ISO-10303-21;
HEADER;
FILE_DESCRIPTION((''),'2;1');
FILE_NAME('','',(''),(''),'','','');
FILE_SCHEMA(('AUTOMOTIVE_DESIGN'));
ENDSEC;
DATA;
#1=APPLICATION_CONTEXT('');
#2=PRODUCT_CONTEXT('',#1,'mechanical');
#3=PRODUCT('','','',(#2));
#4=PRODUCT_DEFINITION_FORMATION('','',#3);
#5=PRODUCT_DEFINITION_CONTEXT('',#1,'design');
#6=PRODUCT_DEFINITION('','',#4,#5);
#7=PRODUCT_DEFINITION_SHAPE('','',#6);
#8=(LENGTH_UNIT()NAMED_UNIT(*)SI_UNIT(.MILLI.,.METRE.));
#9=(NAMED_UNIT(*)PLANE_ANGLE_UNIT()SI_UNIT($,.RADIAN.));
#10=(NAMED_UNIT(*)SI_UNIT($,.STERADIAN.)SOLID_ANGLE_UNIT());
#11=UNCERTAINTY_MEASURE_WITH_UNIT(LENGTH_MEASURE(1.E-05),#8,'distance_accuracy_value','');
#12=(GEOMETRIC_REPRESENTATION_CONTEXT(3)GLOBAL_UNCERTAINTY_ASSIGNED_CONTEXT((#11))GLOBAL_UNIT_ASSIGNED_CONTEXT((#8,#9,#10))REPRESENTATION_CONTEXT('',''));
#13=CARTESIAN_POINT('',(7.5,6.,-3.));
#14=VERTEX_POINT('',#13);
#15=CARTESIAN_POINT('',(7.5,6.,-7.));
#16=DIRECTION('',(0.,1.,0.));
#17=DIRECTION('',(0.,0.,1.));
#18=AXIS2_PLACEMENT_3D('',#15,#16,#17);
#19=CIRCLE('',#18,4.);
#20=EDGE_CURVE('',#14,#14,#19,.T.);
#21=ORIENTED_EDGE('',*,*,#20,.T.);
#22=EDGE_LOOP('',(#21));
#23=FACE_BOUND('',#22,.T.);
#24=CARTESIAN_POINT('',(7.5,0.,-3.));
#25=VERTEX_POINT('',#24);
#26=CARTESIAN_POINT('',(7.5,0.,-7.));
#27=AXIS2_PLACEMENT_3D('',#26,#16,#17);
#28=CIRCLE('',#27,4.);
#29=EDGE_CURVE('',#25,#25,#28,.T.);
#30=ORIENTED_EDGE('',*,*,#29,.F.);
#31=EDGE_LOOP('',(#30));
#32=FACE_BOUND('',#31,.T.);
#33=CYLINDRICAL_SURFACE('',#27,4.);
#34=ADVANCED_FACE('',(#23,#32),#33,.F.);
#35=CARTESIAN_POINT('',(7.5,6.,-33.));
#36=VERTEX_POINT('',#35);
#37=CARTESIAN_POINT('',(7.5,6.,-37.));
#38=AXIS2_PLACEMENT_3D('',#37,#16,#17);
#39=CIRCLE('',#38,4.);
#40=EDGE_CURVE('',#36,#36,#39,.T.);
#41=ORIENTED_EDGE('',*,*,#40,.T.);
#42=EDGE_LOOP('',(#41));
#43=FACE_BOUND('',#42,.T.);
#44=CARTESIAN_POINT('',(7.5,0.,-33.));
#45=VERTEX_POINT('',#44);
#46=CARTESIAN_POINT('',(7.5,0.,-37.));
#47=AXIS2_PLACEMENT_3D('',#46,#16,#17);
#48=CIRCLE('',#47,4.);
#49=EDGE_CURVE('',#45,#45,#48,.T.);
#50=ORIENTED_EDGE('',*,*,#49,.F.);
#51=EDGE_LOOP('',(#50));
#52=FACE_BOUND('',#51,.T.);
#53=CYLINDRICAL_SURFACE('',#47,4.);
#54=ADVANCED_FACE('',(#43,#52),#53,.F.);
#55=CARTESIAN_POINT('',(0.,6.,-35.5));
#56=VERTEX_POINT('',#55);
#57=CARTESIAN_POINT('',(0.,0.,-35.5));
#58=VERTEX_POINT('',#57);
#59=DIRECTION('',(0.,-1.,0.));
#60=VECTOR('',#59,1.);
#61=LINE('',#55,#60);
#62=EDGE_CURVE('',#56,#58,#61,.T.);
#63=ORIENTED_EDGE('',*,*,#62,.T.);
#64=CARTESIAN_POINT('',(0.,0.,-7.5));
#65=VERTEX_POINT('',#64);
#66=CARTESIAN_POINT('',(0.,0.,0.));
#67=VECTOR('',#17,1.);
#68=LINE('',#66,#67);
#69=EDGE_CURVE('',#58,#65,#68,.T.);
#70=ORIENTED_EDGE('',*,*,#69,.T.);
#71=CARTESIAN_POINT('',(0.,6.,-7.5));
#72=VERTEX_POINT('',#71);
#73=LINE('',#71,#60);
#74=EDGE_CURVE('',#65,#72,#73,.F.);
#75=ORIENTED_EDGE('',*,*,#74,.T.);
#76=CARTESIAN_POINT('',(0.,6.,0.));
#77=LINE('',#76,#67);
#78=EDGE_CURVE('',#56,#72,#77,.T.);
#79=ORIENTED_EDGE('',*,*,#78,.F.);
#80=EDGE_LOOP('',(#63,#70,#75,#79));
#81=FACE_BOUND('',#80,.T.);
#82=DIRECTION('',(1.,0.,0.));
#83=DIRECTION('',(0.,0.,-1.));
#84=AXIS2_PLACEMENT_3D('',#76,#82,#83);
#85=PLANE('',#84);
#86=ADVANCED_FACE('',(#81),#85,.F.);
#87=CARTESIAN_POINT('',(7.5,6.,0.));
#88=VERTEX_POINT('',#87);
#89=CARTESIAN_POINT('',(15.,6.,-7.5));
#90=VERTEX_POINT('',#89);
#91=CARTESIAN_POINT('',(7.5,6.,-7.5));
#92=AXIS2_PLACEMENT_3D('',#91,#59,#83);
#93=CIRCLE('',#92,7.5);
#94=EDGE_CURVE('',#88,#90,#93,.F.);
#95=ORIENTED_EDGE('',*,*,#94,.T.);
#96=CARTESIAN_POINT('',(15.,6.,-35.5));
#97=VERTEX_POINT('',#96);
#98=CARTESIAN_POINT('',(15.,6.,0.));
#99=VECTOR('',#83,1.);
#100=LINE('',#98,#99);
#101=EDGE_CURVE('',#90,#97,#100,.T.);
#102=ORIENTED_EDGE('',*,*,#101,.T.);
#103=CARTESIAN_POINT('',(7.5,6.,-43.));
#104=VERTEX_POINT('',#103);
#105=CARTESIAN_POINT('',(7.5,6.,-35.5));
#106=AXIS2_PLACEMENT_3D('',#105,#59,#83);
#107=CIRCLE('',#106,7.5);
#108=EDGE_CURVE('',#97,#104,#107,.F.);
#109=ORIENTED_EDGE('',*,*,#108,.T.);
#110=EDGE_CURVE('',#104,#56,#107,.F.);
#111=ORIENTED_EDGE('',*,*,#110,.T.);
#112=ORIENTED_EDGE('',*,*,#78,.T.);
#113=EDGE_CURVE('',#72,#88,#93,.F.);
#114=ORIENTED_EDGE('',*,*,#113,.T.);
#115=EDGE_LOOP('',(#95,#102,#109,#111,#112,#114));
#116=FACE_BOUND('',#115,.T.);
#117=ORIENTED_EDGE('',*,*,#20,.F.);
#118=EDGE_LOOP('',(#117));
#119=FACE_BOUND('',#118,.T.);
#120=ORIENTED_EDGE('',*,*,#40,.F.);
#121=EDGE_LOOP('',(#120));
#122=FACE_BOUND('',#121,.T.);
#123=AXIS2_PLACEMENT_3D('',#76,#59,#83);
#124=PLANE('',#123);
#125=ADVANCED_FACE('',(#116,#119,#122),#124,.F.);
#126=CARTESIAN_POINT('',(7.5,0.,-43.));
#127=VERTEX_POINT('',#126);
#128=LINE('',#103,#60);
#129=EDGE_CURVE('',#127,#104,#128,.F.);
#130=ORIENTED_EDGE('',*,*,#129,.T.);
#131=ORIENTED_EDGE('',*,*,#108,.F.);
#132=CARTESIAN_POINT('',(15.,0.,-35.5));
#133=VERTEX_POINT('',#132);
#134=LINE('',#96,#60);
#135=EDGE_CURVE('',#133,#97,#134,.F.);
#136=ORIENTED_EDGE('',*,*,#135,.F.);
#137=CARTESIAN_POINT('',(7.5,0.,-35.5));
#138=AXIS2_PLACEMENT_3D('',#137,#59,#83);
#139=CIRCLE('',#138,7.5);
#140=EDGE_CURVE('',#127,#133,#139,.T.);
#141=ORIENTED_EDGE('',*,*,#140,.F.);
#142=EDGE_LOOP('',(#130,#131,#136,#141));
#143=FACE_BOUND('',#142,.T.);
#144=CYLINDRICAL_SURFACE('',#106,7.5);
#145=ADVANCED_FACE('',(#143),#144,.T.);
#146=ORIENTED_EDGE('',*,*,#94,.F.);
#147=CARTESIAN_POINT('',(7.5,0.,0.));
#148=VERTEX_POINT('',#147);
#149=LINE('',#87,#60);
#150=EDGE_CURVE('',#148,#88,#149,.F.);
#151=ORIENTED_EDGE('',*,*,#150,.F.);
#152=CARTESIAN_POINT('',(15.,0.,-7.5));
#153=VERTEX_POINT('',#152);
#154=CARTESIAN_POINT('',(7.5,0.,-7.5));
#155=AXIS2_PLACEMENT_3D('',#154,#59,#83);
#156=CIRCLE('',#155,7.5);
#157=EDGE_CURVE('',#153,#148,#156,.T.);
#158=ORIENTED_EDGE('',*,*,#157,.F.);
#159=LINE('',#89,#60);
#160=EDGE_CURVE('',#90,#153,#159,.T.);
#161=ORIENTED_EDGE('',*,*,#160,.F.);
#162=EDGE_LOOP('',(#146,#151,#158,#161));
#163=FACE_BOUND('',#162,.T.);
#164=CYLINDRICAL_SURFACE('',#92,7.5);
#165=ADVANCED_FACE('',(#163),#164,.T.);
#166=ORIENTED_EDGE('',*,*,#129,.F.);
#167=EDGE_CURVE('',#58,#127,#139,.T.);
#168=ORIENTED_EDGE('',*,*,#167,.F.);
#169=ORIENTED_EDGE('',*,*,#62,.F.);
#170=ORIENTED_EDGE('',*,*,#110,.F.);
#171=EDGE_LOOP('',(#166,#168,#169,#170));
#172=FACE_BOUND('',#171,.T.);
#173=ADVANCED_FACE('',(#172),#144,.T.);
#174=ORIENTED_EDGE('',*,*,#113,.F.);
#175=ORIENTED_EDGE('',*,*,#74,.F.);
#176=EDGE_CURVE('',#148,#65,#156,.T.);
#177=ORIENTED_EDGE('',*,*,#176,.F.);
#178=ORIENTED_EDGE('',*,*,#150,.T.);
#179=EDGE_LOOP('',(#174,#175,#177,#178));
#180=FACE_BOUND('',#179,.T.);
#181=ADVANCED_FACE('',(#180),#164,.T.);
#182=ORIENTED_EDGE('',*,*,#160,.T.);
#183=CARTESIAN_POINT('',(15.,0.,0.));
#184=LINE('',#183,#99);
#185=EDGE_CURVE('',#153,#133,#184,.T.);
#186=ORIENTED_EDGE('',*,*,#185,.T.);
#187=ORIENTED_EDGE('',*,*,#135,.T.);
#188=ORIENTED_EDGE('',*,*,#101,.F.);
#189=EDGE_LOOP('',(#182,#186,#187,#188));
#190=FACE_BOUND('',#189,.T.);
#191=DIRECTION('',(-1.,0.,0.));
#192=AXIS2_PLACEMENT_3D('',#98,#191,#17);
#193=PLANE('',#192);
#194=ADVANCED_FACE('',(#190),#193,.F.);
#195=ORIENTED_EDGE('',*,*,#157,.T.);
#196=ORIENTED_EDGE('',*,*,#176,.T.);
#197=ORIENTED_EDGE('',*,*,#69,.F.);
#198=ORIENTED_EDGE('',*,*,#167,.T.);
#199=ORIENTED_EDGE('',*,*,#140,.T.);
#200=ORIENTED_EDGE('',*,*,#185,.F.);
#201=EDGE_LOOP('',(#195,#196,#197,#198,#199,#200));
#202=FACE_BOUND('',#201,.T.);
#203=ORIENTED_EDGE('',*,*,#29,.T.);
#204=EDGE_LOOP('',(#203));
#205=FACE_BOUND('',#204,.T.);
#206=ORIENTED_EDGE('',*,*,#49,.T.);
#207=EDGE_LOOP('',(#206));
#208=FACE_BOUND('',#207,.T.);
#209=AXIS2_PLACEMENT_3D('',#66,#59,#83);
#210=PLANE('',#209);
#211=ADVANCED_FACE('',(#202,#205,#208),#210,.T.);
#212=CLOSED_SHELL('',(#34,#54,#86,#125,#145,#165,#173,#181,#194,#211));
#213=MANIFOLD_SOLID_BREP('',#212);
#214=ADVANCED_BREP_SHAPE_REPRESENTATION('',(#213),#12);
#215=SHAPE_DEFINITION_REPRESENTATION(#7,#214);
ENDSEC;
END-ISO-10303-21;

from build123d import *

# Parameters (mm, degrees)
SKETCH1_W           = 15
SKETCH1_H           = 43
BOSS_EXTRUDE1_DEPTH = 6
SKETCH4_R           = 4
CUT_EXTRUDE2_DEPTH  = 46.934736311
FILLET1_R           = 7.5


with BuildPart() as part:
    # Sketch1 → Boss-Extrude1 (new body)
    with BuildSketch(Plane(origin=(0, 0, 0), x_dir=(1, 0, 0), z_dir=(0, 1, 0))):
        with Locations((7.5, 21.5)):
            Rectangle(SKETCH1_W, SKETCH1_H)
    extrude(amount=BOSS_EXTRUDE1_DEPTH)

    # Sketch4 → Cut-Extrude2 (cut, through all)
    with BuildSketch(Plane(origin=(0, 6, 0), x_dir=(1, 0, 0), z_dir=(0, 1, 0))):
        with Locations(Location((7.5, 37, 0), (0, 0, 270))):
            Circle(SKETCH4_R)
        with Locations(Location((7.5, 7, 0), (0, 0, 270))):
            Circle(SKETCH4_R)
    extrude(amount=-CUT_EXTRUDE2_DEPTH, mode=Mode.SUBTRACT)

    # Fillet1
    fillet1_edges = [part.edges().sort_by_distance(p)[0] for p in [
        (0, 3, 0),
        (15, 3, 0),
        (15, 3, -43),
        (0, 3, -43),
    ]]
    fillet(fillet1_edges, radius=FILLET1_R - 0.0001)  # a hair under: the kernel refuses the full size


solid = part.part
